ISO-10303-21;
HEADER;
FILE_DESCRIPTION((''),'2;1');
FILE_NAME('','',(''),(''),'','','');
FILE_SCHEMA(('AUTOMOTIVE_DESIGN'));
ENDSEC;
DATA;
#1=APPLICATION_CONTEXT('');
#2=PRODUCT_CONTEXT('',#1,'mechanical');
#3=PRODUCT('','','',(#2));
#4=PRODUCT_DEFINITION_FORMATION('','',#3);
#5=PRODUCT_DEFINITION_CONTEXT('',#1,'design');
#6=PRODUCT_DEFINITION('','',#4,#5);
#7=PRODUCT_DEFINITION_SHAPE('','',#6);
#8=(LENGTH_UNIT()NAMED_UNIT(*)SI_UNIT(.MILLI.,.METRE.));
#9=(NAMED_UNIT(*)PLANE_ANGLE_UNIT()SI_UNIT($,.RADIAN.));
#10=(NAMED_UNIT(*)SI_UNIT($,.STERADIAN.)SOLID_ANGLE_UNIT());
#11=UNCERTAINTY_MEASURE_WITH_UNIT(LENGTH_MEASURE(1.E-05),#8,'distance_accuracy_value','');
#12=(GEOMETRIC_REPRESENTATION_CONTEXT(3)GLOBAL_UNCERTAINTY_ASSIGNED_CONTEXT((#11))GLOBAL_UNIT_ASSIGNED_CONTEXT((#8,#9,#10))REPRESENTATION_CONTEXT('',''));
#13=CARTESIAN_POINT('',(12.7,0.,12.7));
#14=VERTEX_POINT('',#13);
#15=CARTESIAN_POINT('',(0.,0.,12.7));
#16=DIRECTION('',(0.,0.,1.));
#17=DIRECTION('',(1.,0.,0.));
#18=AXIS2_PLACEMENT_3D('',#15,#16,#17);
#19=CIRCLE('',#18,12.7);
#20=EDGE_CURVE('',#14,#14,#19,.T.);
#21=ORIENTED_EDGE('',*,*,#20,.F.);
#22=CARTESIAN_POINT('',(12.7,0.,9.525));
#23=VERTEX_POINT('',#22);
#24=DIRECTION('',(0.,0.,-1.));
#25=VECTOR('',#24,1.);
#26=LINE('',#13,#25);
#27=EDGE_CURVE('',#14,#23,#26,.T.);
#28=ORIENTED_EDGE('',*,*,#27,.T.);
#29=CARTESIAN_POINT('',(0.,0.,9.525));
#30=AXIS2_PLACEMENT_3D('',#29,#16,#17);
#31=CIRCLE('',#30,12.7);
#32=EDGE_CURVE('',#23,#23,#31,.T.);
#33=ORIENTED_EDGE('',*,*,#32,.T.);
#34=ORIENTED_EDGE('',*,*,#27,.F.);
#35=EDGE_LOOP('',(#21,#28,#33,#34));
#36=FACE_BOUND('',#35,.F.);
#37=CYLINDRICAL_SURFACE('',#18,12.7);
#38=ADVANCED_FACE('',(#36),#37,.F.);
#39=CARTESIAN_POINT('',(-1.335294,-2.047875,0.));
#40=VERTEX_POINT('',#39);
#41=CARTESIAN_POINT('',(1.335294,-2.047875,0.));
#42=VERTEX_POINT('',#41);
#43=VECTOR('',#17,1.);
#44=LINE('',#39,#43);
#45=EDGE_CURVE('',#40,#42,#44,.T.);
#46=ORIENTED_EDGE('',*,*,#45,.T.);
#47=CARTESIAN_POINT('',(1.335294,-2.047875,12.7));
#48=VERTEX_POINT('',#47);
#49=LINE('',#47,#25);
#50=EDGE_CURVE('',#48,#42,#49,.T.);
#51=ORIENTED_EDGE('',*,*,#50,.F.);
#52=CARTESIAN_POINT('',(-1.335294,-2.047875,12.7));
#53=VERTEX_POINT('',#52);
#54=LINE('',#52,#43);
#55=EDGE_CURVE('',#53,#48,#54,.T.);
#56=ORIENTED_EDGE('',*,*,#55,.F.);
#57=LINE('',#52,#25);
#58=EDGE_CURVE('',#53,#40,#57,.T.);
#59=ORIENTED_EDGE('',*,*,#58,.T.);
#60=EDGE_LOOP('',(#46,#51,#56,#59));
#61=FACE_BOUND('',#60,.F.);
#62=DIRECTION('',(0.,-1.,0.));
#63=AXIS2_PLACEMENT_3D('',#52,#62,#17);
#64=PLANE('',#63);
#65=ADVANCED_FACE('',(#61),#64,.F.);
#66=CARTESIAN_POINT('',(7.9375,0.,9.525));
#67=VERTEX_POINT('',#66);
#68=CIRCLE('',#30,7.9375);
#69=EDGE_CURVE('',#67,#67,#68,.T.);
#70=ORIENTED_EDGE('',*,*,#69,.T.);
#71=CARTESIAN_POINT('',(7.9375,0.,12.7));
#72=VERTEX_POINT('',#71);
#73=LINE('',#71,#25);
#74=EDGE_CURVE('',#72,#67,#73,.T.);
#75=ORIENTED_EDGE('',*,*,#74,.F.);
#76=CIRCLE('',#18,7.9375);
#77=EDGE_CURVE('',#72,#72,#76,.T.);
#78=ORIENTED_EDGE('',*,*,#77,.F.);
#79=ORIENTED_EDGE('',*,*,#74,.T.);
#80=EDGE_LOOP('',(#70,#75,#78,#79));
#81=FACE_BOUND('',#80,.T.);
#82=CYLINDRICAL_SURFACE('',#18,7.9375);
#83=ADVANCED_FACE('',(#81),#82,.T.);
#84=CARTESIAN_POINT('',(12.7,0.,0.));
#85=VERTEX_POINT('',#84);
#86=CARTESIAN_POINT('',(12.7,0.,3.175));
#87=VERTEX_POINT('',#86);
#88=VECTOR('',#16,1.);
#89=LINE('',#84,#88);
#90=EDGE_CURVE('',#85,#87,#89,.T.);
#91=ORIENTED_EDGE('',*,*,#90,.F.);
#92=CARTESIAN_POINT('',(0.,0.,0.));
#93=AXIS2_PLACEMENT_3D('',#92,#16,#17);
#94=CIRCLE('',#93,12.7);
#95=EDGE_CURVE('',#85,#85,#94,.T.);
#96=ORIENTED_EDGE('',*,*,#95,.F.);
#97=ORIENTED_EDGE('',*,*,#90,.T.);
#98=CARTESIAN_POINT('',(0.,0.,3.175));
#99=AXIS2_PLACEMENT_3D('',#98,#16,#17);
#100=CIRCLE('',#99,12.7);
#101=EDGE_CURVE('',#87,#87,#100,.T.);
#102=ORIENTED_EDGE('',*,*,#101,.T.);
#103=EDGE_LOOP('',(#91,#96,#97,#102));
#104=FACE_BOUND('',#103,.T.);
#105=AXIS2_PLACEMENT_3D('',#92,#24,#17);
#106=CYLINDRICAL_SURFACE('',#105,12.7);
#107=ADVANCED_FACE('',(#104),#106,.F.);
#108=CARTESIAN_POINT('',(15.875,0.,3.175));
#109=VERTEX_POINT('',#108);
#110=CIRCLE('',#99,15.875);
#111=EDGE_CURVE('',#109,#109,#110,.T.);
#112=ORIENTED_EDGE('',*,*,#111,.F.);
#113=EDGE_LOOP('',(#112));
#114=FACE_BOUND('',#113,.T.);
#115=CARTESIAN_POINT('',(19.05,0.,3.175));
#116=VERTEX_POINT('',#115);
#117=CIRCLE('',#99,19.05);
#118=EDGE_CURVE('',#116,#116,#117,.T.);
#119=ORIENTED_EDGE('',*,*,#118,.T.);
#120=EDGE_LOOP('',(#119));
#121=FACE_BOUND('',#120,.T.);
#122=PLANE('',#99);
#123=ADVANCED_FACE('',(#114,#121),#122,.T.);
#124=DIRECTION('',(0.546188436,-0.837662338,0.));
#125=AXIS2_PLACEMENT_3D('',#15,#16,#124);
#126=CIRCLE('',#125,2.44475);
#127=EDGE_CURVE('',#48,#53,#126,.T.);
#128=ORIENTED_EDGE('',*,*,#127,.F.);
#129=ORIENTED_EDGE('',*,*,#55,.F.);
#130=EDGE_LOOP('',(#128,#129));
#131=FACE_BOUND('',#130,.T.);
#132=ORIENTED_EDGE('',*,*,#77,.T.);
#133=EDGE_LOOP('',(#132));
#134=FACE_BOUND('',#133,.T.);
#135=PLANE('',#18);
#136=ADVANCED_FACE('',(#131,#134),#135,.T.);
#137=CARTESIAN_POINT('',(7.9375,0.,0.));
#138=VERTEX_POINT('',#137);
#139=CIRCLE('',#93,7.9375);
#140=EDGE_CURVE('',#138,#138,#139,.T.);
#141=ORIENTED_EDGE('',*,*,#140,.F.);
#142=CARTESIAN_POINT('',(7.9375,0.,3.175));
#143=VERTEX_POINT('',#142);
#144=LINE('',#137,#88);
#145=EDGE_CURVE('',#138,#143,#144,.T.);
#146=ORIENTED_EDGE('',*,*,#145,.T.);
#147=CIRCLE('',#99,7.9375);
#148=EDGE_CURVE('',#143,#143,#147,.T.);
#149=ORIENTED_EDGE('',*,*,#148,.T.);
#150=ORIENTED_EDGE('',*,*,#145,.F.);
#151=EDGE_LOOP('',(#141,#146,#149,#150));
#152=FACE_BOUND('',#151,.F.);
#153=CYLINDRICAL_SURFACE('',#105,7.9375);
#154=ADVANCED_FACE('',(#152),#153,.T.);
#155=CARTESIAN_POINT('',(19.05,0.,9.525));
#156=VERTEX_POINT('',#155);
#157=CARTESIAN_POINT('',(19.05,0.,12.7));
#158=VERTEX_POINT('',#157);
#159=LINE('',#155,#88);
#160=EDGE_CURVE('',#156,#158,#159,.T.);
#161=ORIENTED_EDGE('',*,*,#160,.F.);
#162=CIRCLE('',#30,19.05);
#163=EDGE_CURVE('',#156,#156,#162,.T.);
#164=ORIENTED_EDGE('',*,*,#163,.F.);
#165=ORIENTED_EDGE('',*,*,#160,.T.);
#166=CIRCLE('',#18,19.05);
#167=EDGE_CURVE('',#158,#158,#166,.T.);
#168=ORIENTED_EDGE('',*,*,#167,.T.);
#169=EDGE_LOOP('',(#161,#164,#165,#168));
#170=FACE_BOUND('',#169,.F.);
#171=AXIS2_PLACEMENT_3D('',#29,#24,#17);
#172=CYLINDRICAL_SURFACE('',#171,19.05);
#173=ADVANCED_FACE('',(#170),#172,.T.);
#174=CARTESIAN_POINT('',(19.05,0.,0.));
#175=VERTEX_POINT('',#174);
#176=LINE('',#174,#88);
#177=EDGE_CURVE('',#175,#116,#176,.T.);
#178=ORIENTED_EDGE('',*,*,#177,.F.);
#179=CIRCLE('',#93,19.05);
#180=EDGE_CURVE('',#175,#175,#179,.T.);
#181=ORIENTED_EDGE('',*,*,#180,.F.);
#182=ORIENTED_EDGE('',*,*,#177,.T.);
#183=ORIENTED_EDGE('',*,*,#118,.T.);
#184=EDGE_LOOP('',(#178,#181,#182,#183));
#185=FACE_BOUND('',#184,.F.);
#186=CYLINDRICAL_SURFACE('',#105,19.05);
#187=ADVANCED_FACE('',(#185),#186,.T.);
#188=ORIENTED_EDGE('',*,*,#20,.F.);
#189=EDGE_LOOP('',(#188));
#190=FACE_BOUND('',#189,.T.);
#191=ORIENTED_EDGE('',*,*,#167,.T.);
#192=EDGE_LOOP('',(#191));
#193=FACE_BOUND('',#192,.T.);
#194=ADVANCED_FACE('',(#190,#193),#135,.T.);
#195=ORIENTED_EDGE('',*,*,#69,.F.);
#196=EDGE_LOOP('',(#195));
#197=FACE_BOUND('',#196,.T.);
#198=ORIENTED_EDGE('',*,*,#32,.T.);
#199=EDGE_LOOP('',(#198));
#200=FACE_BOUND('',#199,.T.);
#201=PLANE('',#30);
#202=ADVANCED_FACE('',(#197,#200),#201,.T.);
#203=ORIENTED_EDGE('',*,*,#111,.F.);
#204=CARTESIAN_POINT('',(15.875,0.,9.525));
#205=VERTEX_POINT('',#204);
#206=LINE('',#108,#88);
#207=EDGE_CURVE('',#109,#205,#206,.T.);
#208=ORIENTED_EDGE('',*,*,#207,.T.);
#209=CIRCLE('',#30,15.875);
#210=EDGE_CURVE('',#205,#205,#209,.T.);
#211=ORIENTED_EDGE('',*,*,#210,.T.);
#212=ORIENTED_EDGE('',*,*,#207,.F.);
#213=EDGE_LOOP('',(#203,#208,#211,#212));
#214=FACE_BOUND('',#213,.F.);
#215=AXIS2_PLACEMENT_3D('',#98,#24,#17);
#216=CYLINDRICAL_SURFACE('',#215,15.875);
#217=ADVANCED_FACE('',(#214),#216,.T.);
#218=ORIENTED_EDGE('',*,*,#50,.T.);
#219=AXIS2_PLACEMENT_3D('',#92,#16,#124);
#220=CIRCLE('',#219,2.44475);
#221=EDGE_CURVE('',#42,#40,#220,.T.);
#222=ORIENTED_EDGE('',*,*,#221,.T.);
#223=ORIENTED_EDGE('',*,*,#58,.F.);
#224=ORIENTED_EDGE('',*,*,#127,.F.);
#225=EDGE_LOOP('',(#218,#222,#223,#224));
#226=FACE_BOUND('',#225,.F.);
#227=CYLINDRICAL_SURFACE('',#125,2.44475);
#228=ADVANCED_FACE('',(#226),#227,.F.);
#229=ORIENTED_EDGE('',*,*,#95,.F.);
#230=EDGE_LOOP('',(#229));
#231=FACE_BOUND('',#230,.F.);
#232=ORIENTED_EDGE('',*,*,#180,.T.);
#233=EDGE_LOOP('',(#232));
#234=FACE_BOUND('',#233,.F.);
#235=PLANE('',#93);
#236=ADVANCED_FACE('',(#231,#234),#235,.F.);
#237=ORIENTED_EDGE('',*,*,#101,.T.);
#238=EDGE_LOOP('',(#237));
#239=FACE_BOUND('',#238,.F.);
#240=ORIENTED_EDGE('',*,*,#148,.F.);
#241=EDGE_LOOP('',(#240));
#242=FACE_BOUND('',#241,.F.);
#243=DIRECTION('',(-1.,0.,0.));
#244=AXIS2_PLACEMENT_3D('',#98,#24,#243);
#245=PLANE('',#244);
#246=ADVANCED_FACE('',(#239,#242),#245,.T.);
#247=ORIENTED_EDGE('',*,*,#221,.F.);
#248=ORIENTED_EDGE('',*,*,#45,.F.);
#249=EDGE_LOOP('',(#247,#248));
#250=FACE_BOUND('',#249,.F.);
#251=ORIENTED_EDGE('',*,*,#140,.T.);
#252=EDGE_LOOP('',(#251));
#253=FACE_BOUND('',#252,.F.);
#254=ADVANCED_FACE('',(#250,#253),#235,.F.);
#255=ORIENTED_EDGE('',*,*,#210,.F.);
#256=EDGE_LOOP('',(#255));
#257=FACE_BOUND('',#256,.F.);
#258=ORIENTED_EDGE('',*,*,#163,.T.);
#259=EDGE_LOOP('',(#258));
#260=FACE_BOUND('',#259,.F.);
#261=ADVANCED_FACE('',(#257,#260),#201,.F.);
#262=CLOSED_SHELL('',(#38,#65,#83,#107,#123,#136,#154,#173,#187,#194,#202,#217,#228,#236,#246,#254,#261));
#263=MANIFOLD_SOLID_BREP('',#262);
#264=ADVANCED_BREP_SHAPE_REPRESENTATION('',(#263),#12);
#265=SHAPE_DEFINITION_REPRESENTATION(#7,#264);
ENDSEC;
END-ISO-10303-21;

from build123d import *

# Parameters (mm, degrees)
F0_R      = 19.05
F1_DEPTH  = 3.175
F2_R      = 15.875
F3_DEPTH  = 6.35
F4_R      = 19.05
F5_DEPTH  = 3.175
F6_R      = 12.7
F6_R_2    = 7.9375
F7_DEPTH  = 3.175
F10_DEPTH = 12.7


# Not quite as in the source:
# - a pattern or mirror of a feature is missing from the dataset's text; its kind, count and spacing are read off the source's solid


with BuildPart() as f1:
    # F0 (on Top) → F1 (new body)
    with BuildSketch(Plane.XY):
        Circle(F0_R)
    extrude(amount=F1_DEPTH)

    # F2 (on face) → F3 (join)
    with BuildSketch(Plane.XY.offset(3.175)):
        Circle(F2_R)
    extrude(amount=F3_DEPTH)

    # F4 (on face) → F5 (join)
    with BuildSketch(Plane.XY.offset(9.525)):
        Circle(F4_R)
    extrude(amount=F5_DEPTH)

    # F6 (on face) → F7 (cut)
    with BuildSketch(Plane.XY.offset(12.7)):
        Circle(F6_R)
        Circle(F6_R_2, mode=Mode.SUBTRACT)
    f7 = extrude(amount=-F7_DEPTH, mode=Mode.SUBTRACT)

    # F7_copies: F7 across plane
    add(f7.mirror(Plane(origin=(0, 0, 6.35), x_dir=(-1, 0, 0), z_dir=(0, 0, -1))), mode=Mode.SUBTRACT)

    # F9 (on face) → F10 (cut, through all)
    with BuildSketch(Plane.XY.offset(12.7)):
        with BuildLine():
            Line((-1.3352941799, -2.047875), (1.3352941799, -2.047875))
            ThreePointArc((1.3352941799, -2.047875), (0, 2.44475), (-1.3352941799, -2.047875))
        make_face()
    extrude(amount=-F10_DEPTH, mode=Mode.SUBTRACT)


solid = f1.part
